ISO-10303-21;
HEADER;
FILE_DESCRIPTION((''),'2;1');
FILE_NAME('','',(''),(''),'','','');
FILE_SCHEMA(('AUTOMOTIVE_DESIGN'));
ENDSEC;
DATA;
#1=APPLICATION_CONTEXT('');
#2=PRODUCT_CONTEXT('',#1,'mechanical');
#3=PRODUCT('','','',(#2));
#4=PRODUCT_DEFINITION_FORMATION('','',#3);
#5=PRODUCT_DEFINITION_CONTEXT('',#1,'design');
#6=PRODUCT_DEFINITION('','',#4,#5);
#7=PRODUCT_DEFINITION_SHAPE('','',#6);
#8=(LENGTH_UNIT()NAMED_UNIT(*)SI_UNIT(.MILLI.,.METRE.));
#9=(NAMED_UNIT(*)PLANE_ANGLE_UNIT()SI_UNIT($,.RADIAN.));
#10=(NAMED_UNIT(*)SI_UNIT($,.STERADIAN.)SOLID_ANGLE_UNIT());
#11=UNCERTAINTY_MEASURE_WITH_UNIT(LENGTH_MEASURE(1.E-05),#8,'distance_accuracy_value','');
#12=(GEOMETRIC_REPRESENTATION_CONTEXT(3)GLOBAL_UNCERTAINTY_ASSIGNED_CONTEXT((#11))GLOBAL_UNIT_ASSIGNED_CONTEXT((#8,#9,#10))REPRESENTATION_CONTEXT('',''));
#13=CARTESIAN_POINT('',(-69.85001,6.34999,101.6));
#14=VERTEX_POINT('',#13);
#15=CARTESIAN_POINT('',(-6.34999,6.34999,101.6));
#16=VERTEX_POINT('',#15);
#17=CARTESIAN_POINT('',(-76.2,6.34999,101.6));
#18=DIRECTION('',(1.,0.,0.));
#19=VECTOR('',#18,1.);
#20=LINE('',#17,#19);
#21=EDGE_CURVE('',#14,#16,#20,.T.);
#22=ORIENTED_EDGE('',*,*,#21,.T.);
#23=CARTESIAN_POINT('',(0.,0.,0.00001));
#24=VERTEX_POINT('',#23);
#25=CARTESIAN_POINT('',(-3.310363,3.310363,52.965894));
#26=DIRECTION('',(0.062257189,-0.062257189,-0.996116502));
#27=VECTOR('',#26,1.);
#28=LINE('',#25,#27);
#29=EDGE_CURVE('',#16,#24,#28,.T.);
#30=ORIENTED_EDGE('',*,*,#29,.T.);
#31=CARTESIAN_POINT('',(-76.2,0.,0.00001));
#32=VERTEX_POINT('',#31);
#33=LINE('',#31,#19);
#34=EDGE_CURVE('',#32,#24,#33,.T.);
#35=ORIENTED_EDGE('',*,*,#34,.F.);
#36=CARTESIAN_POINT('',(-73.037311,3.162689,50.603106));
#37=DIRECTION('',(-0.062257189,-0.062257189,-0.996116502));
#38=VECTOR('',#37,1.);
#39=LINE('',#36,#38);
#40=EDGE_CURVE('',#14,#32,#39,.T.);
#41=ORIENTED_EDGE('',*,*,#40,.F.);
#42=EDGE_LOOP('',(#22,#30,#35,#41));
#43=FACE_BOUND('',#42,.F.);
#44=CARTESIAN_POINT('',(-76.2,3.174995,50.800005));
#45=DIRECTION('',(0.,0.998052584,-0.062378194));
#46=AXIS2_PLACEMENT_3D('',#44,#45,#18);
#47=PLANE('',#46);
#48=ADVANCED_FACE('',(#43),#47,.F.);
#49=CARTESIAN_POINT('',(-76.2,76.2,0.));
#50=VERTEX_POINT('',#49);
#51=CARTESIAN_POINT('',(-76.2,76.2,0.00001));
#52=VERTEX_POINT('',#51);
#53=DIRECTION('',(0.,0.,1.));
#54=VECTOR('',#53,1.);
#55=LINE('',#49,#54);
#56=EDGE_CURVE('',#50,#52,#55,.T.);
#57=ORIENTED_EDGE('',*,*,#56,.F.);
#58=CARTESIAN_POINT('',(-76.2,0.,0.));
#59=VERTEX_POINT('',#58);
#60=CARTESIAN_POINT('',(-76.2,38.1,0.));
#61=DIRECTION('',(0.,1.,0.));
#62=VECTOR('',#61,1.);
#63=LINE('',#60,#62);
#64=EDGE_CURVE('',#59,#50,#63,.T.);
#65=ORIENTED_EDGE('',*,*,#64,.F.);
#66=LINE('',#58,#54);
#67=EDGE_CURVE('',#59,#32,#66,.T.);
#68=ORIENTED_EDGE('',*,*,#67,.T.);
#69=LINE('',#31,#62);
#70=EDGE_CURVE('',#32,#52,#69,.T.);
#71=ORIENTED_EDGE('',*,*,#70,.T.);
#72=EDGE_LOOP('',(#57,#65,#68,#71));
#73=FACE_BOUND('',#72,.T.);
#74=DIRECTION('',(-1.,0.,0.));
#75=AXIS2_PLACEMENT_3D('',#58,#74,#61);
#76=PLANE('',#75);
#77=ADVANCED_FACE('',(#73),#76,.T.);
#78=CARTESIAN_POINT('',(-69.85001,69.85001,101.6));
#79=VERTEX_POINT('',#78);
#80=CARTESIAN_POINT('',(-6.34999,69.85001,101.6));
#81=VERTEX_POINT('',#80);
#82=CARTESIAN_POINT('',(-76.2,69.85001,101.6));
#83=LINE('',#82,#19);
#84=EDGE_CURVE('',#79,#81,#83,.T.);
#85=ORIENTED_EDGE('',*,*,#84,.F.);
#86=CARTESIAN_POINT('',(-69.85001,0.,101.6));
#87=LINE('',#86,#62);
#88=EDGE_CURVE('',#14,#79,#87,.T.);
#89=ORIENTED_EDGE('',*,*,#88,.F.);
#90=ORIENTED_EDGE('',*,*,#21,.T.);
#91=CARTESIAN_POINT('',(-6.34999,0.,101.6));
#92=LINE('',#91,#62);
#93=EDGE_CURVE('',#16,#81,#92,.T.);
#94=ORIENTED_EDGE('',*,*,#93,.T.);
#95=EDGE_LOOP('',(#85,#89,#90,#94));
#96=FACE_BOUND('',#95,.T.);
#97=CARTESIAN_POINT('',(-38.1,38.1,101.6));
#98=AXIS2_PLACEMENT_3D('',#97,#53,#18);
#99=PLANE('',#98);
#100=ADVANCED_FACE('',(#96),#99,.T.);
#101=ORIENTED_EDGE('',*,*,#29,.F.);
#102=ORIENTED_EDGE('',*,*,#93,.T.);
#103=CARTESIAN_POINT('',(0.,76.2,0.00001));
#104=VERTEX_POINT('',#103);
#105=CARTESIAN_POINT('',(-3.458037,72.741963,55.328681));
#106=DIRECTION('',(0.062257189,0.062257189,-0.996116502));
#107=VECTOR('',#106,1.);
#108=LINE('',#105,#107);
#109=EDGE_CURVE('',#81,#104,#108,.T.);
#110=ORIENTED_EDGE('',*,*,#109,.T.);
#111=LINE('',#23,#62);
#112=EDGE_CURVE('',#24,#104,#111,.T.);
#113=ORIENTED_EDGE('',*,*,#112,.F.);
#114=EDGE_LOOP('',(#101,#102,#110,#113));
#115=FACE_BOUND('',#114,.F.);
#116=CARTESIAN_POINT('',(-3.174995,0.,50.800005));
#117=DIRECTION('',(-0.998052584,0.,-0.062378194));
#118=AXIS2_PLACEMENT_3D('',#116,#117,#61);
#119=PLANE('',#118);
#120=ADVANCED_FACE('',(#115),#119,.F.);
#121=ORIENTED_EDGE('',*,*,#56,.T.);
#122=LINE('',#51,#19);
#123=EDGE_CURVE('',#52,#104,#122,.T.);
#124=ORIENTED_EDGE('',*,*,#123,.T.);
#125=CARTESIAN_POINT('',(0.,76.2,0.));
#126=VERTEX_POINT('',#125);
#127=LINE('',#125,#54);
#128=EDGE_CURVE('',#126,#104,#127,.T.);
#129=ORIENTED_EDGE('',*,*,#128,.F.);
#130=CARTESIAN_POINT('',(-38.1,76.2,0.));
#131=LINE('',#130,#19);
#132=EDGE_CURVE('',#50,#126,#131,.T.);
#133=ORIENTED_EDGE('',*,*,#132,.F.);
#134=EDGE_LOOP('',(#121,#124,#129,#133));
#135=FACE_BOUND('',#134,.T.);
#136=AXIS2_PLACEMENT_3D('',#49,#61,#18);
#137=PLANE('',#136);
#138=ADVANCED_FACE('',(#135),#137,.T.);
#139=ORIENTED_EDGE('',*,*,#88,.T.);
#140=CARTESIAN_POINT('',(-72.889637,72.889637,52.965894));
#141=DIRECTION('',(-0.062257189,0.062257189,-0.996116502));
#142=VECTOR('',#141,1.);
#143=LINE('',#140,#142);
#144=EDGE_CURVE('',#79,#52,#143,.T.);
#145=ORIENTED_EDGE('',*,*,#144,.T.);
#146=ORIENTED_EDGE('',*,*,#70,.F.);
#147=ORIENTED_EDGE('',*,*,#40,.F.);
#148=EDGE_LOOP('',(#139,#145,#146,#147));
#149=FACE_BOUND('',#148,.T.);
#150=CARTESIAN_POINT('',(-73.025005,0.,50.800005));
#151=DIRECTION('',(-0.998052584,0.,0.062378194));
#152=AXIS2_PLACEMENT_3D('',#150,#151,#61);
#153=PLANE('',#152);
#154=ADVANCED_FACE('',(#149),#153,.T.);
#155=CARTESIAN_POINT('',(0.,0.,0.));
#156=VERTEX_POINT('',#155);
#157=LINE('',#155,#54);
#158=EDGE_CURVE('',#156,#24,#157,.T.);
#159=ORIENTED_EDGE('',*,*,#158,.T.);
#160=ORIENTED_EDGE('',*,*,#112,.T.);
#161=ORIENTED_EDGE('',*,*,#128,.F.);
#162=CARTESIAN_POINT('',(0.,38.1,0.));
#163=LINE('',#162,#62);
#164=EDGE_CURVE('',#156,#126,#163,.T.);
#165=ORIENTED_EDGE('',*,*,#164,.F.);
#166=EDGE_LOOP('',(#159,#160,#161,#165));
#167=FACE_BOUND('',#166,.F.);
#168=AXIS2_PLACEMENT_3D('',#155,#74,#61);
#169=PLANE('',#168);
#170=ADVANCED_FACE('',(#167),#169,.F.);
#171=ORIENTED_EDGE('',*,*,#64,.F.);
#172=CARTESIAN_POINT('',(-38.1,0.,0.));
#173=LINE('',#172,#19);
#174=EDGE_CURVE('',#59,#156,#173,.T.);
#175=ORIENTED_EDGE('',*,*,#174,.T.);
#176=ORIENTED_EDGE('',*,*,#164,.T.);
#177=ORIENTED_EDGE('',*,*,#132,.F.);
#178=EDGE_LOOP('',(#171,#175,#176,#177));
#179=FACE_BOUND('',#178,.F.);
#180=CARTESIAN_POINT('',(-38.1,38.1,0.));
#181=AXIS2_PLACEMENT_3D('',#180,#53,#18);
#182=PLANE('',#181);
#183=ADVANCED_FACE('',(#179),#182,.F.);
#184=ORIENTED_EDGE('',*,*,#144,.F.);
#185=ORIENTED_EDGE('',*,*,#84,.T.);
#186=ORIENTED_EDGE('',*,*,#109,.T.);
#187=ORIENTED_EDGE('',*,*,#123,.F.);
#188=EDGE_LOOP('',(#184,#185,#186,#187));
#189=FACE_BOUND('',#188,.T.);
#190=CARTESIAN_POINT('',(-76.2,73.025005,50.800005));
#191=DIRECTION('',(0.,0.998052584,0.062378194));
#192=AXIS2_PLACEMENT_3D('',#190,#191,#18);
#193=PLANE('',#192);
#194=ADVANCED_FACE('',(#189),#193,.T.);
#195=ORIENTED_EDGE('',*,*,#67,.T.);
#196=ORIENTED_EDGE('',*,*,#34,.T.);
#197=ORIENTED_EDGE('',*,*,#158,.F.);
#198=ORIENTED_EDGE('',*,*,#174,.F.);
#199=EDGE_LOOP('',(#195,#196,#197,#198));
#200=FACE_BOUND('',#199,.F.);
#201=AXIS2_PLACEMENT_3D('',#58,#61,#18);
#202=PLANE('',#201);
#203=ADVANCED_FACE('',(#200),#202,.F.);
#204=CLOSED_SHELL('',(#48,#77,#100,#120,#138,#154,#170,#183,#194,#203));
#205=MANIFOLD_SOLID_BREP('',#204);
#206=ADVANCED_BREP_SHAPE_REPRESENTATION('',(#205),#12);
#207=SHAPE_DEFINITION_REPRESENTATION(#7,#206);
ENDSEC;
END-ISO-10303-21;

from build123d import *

# Parameters (mm, degrees)
F0_W     = 76.2
F0_H     = 76.2
F1_DEPTH = 101.6
F2_SIZE2 = 101.59999
F2_SIZE  = 6.34999


# Not quite as in the source:
# - a fillet or chamfer is up to 0.001 mm smaller than in the source, because OpenCascade refuses the exact size


with BuildPart() as f1:
    # F0 (on Top) → F1 (new body)
    with BuildSketch(Plane.XY):
        with Locations((-38.1, 38.1)):
            Rectangle(F0_W, F0_H)
    extrude(amount=F1_DEPTH)

    # F2 (size 6.35 and 101.6 in the source; OpenCascade refuses exactly that, so slightly less here)
    f2_edges = [f1.edges().sort_by_distance(p)[0] for p in [
        (-38.1, 0, 101.6),
        (-76.2, 38.1, 101.6),
        (0, 38.1, 101.6),
        (-38.1, 76.2, 101.6),
    ]]
    f2_side = f1.faces().sort_by_distance((-38.1, 38.1, 101.6))[0]
    chamfer(f2_edges, length=F2_SIZE, length2=F2_SIZE2, reference=f2_side)


solid = f1.part
